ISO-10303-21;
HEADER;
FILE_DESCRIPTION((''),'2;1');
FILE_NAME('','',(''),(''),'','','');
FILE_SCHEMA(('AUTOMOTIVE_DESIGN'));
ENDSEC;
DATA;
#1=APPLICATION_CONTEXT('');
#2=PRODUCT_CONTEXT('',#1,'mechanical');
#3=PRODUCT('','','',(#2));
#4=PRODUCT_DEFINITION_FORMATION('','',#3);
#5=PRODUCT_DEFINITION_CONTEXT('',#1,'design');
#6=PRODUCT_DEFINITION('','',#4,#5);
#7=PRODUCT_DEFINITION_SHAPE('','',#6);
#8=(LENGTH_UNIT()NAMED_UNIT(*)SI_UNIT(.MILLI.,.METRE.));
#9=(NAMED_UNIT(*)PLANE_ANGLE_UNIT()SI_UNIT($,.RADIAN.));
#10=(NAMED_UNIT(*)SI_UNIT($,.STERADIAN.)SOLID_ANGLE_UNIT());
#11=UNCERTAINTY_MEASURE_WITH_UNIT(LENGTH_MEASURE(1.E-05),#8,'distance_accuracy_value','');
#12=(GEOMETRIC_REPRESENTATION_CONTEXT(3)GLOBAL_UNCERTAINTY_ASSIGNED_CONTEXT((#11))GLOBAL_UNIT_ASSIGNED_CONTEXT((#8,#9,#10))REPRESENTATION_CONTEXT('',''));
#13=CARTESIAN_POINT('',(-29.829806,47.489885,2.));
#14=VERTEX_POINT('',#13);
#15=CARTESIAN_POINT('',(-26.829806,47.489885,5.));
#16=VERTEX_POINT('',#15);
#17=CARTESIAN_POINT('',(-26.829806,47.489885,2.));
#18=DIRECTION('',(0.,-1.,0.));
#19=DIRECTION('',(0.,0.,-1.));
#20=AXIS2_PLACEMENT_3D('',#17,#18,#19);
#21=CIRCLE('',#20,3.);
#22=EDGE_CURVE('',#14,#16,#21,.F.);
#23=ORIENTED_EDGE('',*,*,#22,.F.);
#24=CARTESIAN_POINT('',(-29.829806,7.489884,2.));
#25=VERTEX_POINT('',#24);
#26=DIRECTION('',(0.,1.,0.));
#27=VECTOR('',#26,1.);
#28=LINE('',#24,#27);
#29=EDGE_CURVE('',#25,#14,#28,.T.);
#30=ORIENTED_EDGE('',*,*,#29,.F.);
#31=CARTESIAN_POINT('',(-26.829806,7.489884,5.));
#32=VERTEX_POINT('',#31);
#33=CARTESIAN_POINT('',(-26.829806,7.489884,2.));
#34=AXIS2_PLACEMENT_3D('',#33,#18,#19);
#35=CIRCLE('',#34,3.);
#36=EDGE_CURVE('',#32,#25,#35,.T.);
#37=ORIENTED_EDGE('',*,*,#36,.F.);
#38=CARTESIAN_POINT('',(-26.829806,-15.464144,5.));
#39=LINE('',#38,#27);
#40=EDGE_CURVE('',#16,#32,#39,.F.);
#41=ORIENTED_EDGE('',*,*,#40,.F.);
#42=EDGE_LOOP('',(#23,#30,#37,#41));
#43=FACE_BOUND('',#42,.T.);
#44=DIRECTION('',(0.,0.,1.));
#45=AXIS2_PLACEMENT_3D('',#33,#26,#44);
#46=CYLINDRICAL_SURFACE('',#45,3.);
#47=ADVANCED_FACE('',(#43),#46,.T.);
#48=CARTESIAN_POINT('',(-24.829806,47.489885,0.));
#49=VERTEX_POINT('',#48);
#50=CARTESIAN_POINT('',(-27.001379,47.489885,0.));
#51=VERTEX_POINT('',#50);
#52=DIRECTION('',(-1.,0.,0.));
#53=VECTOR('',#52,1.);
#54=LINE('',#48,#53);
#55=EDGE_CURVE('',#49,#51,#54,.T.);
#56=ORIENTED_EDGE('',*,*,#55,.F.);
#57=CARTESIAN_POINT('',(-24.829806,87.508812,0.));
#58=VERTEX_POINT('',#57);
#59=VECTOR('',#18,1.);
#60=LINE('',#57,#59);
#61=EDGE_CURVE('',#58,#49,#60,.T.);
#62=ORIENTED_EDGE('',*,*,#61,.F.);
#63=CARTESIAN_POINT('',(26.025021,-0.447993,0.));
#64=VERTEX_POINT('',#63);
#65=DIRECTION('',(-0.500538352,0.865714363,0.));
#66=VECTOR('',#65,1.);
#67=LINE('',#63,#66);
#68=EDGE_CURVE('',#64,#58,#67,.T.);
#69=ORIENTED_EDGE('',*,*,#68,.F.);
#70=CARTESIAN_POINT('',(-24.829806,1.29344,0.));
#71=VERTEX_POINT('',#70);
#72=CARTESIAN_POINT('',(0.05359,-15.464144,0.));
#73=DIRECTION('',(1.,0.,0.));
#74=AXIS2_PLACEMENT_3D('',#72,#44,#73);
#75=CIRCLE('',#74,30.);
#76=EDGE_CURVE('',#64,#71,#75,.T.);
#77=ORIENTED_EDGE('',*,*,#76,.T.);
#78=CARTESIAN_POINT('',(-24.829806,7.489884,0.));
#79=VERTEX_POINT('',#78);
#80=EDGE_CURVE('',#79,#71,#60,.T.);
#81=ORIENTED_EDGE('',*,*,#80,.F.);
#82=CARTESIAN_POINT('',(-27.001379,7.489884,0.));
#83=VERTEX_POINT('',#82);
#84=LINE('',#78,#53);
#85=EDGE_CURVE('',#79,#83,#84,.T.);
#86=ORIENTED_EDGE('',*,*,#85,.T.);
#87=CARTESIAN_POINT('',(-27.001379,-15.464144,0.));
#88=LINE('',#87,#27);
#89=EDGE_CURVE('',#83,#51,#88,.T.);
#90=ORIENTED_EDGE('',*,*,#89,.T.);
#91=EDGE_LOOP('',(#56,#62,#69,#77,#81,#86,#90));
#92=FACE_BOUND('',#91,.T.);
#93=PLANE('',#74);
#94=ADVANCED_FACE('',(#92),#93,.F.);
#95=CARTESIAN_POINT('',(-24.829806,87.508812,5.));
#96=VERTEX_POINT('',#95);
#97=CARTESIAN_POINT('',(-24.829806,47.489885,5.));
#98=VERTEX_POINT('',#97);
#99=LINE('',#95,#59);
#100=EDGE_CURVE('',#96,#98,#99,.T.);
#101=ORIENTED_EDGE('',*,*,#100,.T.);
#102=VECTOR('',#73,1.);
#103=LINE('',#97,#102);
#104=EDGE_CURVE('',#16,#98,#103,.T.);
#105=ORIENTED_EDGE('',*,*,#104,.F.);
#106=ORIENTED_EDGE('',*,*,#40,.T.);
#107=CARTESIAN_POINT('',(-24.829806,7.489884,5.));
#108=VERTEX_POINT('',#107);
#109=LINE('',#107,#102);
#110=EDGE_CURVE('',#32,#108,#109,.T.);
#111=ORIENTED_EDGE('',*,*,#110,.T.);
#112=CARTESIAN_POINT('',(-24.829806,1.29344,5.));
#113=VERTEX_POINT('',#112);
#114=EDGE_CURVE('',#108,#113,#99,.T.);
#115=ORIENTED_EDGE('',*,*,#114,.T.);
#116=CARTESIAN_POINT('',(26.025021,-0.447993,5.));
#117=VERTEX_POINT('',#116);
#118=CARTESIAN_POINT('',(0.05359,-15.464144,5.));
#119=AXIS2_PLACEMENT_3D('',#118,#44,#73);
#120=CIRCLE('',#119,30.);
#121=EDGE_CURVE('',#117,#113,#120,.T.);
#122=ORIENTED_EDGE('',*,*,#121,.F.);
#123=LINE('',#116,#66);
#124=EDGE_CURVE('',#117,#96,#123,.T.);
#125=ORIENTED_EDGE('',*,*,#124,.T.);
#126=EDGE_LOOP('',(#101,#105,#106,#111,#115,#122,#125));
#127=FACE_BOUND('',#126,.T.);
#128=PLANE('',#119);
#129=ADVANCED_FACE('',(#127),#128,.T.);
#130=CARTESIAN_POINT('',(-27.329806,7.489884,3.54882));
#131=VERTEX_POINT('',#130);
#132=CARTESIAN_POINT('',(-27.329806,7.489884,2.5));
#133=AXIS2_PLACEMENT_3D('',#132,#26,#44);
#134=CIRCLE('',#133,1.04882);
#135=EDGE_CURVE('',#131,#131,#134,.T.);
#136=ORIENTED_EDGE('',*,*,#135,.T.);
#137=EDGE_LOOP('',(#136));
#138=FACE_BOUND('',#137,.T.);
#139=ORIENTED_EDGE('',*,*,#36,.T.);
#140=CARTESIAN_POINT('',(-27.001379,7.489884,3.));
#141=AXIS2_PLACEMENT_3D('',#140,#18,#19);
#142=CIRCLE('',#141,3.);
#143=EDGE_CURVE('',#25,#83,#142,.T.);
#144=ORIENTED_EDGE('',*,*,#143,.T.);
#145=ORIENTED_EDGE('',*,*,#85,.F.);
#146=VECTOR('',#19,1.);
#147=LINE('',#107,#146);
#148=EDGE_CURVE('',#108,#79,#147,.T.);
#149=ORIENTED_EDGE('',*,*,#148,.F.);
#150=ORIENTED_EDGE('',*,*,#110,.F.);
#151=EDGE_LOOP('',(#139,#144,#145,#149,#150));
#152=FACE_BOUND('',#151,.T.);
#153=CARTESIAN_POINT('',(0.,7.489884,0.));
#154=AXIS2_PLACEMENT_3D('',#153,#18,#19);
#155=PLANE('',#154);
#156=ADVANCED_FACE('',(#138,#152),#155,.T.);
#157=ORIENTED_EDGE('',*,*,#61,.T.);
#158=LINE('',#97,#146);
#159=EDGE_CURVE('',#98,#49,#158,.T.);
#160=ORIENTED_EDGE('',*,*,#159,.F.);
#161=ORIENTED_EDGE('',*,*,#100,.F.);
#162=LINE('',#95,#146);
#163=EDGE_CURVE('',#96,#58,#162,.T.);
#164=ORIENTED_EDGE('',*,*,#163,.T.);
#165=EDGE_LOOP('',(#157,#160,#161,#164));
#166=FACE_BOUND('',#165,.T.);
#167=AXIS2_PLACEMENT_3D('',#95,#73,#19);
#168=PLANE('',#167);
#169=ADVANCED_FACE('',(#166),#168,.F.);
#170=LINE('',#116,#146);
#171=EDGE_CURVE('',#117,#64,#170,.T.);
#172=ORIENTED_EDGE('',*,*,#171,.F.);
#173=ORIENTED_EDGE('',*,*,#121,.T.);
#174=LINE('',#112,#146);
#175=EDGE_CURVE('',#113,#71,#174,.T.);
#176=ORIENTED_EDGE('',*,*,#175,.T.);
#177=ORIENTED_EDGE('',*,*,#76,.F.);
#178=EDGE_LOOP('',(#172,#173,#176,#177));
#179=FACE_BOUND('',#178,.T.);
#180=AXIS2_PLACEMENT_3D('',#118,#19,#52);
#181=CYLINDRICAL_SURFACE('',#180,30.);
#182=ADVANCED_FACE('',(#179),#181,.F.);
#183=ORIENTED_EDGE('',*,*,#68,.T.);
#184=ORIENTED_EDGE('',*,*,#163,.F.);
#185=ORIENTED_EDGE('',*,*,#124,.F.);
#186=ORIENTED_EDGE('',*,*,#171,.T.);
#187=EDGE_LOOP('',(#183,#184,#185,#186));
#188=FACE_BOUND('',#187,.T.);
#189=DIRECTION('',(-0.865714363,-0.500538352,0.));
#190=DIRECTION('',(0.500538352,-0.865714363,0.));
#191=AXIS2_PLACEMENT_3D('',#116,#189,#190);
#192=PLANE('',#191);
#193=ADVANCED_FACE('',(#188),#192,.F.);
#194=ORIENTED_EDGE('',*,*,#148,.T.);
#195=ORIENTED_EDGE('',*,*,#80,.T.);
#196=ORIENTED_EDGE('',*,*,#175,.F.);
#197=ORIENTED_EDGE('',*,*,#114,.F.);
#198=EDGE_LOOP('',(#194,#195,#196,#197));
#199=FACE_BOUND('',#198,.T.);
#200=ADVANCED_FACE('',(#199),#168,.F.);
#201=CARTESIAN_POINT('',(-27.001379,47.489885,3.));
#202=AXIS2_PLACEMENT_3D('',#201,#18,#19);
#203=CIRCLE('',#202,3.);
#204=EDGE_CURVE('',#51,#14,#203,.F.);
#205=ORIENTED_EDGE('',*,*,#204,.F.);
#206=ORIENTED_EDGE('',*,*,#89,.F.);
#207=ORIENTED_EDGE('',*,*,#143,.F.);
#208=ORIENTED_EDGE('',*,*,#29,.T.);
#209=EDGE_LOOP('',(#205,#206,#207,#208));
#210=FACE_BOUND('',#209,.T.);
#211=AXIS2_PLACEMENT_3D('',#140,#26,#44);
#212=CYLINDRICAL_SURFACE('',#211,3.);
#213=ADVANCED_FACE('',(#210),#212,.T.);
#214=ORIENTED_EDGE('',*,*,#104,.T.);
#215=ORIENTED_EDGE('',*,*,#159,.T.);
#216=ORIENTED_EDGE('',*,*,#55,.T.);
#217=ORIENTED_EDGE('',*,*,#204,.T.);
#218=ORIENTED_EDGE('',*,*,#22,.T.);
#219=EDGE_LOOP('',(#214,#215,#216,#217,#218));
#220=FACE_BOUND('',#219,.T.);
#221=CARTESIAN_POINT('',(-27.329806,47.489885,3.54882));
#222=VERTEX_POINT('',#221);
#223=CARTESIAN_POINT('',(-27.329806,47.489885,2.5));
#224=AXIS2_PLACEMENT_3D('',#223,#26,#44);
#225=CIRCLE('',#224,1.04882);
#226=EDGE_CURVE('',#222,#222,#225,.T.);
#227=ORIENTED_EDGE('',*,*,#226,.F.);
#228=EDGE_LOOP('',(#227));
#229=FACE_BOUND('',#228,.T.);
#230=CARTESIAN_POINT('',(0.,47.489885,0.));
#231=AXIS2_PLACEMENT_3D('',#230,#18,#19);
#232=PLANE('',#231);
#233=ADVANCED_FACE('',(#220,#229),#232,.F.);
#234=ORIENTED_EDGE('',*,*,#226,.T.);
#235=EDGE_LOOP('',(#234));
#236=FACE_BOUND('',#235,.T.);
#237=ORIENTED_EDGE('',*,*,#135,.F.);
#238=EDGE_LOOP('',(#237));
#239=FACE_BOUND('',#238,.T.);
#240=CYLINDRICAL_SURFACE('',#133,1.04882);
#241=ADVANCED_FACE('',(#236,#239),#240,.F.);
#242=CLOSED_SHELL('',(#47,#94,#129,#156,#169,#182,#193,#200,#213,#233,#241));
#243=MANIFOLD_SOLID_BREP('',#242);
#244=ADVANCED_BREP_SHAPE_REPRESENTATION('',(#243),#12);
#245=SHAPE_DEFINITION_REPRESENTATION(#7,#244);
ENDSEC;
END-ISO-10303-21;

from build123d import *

# Parameters (mm, degrees)
BOSS_EXTRU_1_DEPTH      = 5
ESQUISSE9_W             = 5
ESQUISSE9_H             = 5
BOSS_EXTRU_3_DEPTH      = 40
ESQUISSE12_R            = 1.048820472
ENL_V_MAT_EXTRU_3_DEPTH = 40
CONG_3_R                = 3
CONG_4_R                = 3


with BuildPart() as part:
    # Esquisse1 → Boss.-Extru.1 (new body)
    with BuildSketch(Plane.XY):
        with BuildLine():
            Line((26.025021052, -0.447992933), (-24.829805977, 87.508811894))
            Line((-24.829805977, 87.508811894), (-24.829805977, 1.293439737))
            ThreePointArc((-24.829805977, 1.293439737), (1.080284786, 14.518282983), (26.025021052, -0.447992933))
        make_face()
    extrude(amount=BOSS_EXTRU_1_DEPTH)

    # Esquisse9 → Boss.-Extru.3 (add)
    with BuildSketch(Plane(origin=(0, 47.4898845, 0), x_dir=(1, 0, 0), z_dir=(0, 1, 0))):
        with Locations((-27.329805977, -2.5)):
            Rectangle(ESQUISSE9_W, ESQUISSE9_H)
    extrude(amount=-BOSS_EXTRU_3_DEPTH)

    # Esquisse12 → Enlèv. mat.-Extru.3 (cut)
    with BuildSketch(Plane(origin=(0, 47.4898845, 0), x_dir=(1, 0, 0), z_dir=(0, 1, 0))):
        with Locations(Location((-27.329805977, -2.5, 0), (0, 0, 270))):
            Circle(ESQUISSE12_R)
    extrude(amount=-ENL_V_MAT_EXTRU_3_DEPTH, mode=Mode.SUBTRACT)

    # Congé3
    cong_3_edges = [part.edges().sort_by_distance(p)[0] for p in [
        (-29.829805977, 27.4898845, 5),
    ]]
    fillet(cong_3_edges, radius=CONG_3_R)

    # Congé4
    # the kernel refuses this fillet: 3 mm, written as the material it takes off along each edge
    with BuildSketch(Plane(origin=(-29.829805977, 54.560952312, 0), x_dir=(0, 0, 1), z_dir=(0, -1, 0))) as cong_4_piece_1:
        with BuildLine():
            CenterArc((3, -2.828427125), CONG_4_R, 109.471220634, 70.528779366)
            Line((0, -2.828427125), (-0.06, -2.828427125))
            Line((-0.06, -2.828427125), (-0.06, 0))
            Line((-0.06, 0), (0, 0.06))
            ThreePointArc((0, 0.06), (1, 0.06), (1.98, 0.056568542))
            Line((1.98, 0.056568542), (2, 0))
        make_face()
    extrude(amount=54.142135624, mode=Mode.SUBTRACT)


solid = part.part
